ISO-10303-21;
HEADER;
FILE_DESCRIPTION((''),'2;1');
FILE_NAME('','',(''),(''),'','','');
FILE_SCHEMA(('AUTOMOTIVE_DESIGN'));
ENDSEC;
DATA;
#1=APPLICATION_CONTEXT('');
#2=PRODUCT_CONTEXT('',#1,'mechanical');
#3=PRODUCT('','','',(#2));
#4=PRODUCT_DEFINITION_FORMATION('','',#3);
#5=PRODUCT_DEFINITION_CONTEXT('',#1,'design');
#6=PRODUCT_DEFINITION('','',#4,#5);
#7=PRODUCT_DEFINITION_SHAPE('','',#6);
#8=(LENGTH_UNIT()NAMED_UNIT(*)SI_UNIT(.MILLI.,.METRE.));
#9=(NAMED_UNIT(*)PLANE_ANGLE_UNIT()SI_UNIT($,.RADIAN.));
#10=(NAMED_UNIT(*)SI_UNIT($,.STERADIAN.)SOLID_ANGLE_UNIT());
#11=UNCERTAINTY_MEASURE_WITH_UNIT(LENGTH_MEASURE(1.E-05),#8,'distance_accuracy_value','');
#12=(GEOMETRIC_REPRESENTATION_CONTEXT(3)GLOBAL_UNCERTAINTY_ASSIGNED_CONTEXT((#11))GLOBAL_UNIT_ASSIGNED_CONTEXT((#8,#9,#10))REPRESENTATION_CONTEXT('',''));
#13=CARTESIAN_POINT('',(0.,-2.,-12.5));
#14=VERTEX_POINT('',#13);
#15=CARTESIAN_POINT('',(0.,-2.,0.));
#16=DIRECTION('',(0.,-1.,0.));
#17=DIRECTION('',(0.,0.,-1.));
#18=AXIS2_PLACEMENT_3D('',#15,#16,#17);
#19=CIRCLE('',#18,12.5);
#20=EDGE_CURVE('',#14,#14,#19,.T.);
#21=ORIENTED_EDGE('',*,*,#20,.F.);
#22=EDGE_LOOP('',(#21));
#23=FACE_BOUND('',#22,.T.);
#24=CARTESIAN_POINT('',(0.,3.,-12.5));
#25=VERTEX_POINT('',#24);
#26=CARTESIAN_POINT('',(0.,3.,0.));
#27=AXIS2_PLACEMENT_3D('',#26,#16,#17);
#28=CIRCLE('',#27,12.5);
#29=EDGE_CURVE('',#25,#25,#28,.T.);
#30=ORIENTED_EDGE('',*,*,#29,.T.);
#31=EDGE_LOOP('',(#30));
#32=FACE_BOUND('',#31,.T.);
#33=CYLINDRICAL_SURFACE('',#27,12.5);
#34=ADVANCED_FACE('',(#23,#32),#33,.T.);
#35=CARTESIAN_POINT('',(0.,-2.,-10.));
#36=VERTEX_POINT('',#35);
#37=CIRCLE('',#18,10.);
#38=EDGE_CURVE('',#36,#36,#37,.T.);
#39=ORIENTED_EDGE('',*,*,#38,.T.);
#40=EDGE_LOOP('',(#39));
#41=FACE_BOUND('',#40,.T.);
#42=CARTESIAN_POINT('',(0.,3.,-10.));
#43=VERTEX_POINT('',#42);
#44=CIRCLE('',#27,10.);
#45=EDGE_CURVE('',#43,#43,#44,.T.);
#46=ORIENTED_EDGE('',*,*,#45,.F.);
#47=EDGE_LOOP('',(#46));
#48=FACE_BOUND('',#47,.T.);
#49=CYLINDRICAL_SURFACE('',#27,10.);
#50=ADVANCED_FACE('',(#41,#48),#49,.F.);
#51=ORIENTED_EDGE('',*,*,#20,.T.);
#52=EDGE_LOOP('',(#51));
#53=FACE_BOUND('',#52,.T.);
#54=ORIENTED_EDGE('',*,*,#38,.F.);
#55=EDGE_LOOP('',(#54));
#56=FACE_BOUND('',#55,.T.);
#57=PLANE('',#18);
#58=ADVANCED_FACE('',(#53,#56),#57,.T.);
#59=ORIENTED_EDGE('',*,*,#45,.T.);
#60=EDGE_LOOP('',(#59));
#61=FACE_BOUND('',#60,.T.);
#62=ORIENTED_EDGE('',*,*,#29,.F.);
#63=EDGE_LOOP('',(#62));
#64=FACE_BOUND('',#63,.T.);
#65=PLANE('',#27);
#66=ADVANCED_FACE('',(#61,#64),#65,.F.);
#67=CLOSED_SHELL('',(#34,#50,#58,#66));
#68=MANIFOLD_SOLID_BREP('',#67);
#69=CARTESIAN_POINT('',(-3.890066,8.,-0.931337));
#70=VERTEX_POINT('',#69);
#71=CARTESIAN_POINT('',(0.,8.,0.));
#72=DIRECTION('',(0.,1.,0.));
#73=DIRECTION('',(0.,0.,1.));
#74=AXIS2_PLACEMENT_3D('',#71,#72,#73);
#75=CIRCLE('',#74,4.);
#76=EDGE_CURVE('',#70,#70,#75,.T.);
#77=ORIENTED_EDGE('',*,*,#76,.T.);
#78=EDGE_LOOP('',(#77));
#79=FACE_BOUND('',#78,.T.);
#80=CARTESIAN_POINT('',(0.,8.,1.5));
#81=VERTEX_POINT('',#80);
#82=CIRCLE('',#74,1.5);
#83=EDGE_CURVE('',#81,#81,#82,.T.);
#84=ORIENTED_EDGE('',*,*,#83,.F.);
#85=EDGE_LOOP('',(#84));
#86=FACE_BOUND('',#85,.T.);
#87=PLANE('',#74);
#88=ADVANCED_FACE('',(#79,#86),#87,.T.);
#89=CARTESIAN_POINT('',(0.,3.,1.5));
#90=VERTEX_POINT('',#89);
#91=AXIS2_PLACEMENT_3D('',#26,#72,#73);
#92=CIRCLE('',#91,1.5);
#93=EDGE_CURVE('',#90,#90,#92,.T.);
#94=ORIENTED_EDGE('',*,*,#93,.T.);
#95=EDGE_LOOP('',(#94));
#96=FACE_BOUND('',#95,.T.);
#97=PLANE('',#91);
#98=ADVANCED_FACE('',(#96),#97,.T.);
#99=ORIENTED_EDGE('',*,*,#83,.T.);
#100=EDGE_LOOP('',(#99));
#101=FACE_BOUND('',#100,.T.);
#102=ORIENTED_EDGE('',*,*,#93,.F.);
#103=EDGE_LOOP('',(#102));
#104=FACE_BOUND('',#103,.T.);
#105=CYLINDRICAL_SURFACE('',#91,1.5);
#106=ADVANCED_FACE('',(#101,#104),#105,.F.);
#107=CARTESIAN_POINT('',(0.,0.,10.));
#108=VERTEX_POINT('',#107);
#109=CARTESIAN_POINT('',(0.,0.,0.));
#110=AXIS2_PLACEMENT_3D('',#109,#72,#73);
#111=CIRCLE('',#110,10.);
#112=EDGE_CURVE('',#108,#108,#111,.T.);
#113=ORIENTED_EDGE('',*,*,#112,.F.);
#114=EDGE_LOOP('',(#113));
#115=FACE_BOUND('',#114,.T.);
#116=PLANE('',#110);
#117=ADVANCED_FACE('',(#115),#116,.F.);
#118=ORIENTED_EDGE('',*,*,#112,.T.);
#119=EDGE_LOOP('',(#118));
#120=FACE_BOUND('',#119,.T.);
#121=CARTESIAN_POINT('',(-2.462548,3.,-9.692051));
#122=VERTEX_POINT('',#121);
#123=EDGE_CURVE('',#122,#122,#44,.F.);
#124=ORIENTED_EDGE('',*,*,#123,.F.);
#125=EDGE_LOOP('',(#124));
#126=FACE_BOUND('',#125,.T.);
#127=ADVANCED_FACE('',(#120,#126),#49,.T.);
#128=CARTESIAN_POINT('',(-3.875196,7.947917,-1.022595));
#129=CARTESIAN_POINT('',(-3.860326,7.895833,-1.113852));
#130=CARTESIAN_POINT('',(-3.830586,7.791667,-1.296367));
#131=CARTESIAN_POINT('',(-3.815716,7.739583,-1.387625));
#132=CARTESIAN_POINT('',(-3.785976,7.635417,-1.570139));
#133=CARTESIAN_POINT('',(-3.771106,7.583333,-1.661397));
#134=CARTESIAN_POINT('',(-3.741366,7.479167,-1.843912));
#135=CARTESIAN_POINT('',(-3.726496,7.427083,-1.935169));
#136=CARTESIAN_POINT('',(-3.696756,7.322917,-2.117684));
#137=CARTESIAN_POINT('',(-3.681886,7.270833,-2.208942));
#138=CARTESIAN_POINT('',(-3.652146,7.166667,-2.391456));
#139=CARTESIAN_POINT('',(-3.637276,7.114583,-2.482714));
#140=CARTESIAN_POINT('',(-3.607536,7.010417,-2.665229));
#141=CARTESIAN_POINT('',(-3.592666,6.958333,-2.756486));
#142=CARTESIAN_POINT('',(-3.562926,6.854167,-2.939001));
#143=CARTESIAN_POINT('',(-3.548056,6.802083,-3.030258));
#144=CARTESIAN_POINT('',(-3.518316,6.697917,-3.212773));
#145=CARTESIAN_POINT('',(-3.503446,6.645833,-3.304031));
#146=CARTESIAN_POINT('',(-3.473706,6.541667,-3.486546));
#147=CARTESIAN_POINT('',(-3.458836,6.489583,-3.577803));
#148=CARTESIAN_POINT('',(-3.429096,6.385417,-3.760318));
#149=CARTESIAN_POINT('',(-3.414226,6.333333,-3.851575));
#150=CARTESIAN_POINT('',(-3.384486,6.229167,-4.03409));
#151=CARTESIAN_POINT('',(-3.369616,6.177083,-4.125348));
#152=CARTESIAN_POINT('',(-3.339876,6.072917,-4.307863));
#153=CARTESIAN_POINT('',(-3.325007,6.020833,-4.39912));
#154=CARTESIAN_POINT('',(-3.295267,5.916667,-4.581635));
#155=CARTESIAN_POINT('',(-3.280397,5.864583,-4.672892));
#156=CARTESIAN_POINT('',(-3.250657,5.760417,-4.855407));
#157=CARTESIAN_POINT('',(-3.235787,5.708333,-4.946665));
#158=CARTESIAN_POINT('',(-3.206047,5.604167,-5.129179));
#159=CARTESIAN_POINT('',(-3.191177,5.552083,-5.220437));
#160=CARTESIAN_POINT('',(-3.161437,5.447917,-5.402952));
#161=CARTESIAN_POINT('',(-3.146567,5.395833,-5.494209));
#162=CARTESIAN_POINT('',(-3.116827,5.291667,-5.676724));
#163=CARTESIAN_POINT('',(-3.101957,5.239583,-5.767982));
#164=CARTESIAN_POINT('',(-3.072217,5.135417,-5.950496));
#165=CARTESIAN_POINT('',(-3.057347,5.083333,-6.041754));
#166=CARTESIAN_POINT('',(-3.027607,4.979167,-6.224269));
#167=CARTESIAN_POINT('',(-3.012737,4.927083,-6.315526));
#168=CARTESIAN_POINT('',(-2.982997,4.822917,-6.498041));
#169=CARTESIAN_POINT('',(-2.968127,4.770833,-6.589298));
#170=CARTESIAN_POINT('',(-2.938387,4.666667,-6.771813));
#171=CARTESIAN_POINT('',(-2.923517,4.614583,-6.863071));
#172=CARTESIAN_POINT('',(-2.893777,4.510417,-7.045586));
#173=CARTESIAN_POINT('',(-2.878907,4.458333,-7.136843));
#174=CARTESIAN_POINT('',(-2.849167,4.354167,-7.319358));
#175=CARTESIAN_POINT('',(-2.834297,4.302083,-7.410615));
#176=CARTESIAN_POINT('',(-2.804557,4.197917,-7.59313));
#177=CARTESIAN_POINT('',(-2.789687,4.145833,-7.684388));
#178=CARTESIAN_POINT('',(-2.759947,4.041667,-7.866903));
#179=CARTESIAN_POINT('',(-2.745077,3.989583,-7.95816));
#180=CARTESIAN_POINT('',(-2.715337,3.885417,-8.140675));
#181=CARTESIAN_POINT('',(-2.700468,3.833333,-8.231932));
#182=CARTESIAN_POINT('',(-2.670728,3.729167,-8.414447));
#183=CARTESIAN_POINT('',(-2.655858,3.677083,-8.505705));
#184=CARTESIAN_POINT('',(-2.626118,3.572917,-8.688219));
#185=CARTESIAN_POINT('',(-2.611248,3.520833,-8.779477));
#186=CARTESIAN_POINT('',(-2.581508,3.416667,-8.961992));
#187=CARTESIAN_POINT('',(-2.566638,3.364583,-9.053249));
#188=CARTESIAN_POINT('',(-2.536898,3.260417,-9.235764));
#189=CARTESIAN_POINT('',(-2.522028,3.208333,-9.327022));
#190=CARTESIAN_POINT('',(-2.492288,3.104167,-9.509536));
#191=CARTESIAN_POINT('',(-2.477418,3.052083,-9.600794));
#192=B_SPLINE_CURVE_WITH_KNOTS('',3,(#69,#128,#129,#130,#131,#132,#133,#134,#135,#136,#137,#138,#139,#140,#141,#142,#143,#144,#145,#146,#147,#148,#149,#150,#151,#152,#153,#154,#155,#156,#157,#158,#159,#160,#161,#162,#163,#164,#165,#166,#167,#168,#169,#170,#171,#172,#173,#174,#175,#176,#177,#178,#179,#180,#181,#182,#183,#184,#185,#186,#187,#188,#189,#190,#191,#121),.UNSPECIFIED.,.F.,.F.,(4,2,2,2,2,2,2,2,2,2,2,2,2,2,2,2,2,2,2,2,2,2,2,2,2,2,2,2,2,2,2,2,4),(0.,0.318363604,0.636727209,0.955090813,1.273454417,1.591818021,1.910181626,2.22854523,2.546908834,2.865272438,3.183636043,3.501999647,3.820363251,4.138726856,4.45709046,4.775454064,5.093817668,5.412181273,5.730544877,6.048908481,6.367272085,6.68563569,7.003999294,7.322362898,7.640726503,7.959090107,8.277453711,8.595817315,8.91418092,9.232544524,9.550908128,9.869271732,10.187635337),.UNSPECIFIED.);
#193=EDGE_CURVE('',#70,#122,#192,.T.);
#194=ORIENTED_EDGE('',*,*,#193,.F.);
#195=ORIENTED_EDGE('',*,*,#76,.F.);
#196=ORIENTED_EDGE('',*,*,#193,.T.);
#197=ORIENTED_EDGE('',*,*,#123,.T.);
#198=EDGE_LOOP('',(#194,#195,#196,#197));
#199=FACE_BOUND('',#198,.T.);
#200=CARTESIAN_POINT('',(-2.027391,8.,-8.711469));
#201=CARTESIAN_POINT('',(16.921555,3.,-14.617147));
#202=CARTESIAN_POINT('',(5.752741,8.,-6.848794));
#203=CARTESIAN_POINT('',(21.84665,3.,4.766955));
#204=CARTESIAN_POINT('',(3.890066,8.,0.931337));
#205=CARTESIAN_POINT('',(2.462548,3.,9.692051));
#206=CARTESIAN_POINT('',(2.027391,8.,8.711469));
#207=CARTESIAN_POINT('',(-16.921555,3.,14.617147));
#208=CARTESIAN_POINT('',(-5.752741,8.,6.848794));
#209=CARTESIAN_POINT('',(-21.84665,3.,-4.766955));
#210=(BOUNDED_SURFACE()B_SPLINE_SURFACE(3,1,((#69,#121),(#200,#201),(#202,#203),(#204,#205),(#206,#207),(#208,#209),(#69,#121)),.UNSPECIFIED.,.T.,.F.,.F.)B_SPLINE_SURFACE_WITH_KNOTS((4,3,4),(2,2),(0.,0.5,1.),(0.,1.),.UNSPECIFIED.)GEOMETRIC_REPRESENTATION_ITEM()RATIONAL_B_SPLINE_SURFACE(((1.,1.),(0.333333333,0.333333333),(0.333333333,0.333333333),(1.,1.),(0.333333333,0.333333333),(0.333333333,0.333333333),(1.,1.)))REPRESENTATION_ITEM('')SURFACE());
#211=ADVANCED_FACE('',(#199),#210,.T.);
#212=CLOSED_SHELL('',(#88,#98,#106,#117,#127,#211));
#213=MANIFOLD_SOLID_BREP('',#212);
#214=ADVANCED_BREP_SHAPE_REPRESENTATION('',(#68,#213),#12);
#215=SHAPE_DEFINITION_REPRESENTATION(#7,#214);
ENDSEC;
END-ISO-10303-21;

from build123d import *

# Parameters (mm, degrees)
SKETCH2_R                = 10
BOSS_EXTRUDE1_DEPTH      = 3
SKETCH4_R                = 1.5
CUT_EXTRUDE1_DEPTH       = 5
BOSS_EXTRUDE2_DEPTH      = 2
BOSS_EXTRUDE2_DEPTH_BACK = 3
SKETCH6_R                = 12.5
SKETCH6_R_2              = 10


with BuildPart() as part:
    # Sketch2 → Boss-Extrude1 (new body)
    with BuildSketch(Plane(origin=(0, 0, 0), x_dir=(1, 0, 0), z_dir=(0, 1, 0))):
        with Locations(Location((0, 0, 0), (0, 0, 270))):
            Circle(SKETCH2_R)
    extrude(amount=BOSS_EXTRUDE1_DEPTH)

    # Loft1: read off the stored shape, not the designer's step
    # Loft1: loft between two sections, ruled curve by curve
    loft1_from = [
        Edge.make_bspline([(-3.890065626, 8, -0.931337439), (-2.027390748, 8, -8.711468691), (5.752740504, 8, -6.848793813), (3.890065626, 8, 0.931337439), (2.027390748, 8, 8.711468691), (-5.752740504, 8, 6.848793813), (-3.890065626, 8, -0.931337439)], [0, 0, 0, 0, 0.5, 0.5, 0.5, 1, 1, 1, 1], 3, [1, 0.333333333, 0.333333333, 1, 0.333333333, 0.333333333, 1]),
    ]
    loft1_to = [
        Edge.make_bspline([(-2.462547893, 3, -9.692051273), (16.921554653, 3, -14.617147059), (21.846650439, 3, 4.766955487), (2.462547893, 3, 9.692051273), (-16.921554653, 3, 14.617147059), (-21.846650439, 3, -4.766955487), (-2.462547893, 3, -9.692051273)], [0, 0, 0, 0, 0.5, 0.5, 0.5, 1, 1, 1, 1], 3, [1, 0.333333333, 0.333333333, 1, 0.333333333, 0.333333333, 1]),
    ]
    loft1 = Solid(Shell([*[Face.make_surface_from_curves(loft1_from[k], loft1_to[k]) for k in range(1)], Face(Wire(loft1_from)), Face(Wire(loft1_to))]))
    add(loft1)

    # Sketch4 → Cut-Extrude1 (cut)
    with BuildSketch(Plane(origin=(0, 8, 0), x_dir=(1, 0, 0), z_dir=(0, 1, 0))):
        with Locations(Location((0, 0, 0), (0, 0, 270))):
            Circle(SKETCH4_R)
    extrude(amount=-CUT_EXTRUDE1_DEPTH, mode=Mode.SUBTRACT)


with BuildPart() as body_2:
    # Sketch6 → Boss-Extrude2 (new, two sides: drawn at the far end of the back side and taken through both)
    with BuildSketch(Plane.XZ.offset(-BOSS_EXTRUDE2_DEPTH_BACK)):
        with Locations(Location((0, 0, 0), (0, 0, 270))):
            Circle(SKETCH6_R)
        with Locations(Location((0, 0, 0), (0, 0, 270))):
            Circle(SKETCH6_R_2, mode=Mode.SUBTRACT)
    extrude(amount=BOSS_EXTRUDE2_DEPTH + BOSS_EXTRUDE2_DEPTH_BACK)


solid = Compound([part.part, body_2.part])
